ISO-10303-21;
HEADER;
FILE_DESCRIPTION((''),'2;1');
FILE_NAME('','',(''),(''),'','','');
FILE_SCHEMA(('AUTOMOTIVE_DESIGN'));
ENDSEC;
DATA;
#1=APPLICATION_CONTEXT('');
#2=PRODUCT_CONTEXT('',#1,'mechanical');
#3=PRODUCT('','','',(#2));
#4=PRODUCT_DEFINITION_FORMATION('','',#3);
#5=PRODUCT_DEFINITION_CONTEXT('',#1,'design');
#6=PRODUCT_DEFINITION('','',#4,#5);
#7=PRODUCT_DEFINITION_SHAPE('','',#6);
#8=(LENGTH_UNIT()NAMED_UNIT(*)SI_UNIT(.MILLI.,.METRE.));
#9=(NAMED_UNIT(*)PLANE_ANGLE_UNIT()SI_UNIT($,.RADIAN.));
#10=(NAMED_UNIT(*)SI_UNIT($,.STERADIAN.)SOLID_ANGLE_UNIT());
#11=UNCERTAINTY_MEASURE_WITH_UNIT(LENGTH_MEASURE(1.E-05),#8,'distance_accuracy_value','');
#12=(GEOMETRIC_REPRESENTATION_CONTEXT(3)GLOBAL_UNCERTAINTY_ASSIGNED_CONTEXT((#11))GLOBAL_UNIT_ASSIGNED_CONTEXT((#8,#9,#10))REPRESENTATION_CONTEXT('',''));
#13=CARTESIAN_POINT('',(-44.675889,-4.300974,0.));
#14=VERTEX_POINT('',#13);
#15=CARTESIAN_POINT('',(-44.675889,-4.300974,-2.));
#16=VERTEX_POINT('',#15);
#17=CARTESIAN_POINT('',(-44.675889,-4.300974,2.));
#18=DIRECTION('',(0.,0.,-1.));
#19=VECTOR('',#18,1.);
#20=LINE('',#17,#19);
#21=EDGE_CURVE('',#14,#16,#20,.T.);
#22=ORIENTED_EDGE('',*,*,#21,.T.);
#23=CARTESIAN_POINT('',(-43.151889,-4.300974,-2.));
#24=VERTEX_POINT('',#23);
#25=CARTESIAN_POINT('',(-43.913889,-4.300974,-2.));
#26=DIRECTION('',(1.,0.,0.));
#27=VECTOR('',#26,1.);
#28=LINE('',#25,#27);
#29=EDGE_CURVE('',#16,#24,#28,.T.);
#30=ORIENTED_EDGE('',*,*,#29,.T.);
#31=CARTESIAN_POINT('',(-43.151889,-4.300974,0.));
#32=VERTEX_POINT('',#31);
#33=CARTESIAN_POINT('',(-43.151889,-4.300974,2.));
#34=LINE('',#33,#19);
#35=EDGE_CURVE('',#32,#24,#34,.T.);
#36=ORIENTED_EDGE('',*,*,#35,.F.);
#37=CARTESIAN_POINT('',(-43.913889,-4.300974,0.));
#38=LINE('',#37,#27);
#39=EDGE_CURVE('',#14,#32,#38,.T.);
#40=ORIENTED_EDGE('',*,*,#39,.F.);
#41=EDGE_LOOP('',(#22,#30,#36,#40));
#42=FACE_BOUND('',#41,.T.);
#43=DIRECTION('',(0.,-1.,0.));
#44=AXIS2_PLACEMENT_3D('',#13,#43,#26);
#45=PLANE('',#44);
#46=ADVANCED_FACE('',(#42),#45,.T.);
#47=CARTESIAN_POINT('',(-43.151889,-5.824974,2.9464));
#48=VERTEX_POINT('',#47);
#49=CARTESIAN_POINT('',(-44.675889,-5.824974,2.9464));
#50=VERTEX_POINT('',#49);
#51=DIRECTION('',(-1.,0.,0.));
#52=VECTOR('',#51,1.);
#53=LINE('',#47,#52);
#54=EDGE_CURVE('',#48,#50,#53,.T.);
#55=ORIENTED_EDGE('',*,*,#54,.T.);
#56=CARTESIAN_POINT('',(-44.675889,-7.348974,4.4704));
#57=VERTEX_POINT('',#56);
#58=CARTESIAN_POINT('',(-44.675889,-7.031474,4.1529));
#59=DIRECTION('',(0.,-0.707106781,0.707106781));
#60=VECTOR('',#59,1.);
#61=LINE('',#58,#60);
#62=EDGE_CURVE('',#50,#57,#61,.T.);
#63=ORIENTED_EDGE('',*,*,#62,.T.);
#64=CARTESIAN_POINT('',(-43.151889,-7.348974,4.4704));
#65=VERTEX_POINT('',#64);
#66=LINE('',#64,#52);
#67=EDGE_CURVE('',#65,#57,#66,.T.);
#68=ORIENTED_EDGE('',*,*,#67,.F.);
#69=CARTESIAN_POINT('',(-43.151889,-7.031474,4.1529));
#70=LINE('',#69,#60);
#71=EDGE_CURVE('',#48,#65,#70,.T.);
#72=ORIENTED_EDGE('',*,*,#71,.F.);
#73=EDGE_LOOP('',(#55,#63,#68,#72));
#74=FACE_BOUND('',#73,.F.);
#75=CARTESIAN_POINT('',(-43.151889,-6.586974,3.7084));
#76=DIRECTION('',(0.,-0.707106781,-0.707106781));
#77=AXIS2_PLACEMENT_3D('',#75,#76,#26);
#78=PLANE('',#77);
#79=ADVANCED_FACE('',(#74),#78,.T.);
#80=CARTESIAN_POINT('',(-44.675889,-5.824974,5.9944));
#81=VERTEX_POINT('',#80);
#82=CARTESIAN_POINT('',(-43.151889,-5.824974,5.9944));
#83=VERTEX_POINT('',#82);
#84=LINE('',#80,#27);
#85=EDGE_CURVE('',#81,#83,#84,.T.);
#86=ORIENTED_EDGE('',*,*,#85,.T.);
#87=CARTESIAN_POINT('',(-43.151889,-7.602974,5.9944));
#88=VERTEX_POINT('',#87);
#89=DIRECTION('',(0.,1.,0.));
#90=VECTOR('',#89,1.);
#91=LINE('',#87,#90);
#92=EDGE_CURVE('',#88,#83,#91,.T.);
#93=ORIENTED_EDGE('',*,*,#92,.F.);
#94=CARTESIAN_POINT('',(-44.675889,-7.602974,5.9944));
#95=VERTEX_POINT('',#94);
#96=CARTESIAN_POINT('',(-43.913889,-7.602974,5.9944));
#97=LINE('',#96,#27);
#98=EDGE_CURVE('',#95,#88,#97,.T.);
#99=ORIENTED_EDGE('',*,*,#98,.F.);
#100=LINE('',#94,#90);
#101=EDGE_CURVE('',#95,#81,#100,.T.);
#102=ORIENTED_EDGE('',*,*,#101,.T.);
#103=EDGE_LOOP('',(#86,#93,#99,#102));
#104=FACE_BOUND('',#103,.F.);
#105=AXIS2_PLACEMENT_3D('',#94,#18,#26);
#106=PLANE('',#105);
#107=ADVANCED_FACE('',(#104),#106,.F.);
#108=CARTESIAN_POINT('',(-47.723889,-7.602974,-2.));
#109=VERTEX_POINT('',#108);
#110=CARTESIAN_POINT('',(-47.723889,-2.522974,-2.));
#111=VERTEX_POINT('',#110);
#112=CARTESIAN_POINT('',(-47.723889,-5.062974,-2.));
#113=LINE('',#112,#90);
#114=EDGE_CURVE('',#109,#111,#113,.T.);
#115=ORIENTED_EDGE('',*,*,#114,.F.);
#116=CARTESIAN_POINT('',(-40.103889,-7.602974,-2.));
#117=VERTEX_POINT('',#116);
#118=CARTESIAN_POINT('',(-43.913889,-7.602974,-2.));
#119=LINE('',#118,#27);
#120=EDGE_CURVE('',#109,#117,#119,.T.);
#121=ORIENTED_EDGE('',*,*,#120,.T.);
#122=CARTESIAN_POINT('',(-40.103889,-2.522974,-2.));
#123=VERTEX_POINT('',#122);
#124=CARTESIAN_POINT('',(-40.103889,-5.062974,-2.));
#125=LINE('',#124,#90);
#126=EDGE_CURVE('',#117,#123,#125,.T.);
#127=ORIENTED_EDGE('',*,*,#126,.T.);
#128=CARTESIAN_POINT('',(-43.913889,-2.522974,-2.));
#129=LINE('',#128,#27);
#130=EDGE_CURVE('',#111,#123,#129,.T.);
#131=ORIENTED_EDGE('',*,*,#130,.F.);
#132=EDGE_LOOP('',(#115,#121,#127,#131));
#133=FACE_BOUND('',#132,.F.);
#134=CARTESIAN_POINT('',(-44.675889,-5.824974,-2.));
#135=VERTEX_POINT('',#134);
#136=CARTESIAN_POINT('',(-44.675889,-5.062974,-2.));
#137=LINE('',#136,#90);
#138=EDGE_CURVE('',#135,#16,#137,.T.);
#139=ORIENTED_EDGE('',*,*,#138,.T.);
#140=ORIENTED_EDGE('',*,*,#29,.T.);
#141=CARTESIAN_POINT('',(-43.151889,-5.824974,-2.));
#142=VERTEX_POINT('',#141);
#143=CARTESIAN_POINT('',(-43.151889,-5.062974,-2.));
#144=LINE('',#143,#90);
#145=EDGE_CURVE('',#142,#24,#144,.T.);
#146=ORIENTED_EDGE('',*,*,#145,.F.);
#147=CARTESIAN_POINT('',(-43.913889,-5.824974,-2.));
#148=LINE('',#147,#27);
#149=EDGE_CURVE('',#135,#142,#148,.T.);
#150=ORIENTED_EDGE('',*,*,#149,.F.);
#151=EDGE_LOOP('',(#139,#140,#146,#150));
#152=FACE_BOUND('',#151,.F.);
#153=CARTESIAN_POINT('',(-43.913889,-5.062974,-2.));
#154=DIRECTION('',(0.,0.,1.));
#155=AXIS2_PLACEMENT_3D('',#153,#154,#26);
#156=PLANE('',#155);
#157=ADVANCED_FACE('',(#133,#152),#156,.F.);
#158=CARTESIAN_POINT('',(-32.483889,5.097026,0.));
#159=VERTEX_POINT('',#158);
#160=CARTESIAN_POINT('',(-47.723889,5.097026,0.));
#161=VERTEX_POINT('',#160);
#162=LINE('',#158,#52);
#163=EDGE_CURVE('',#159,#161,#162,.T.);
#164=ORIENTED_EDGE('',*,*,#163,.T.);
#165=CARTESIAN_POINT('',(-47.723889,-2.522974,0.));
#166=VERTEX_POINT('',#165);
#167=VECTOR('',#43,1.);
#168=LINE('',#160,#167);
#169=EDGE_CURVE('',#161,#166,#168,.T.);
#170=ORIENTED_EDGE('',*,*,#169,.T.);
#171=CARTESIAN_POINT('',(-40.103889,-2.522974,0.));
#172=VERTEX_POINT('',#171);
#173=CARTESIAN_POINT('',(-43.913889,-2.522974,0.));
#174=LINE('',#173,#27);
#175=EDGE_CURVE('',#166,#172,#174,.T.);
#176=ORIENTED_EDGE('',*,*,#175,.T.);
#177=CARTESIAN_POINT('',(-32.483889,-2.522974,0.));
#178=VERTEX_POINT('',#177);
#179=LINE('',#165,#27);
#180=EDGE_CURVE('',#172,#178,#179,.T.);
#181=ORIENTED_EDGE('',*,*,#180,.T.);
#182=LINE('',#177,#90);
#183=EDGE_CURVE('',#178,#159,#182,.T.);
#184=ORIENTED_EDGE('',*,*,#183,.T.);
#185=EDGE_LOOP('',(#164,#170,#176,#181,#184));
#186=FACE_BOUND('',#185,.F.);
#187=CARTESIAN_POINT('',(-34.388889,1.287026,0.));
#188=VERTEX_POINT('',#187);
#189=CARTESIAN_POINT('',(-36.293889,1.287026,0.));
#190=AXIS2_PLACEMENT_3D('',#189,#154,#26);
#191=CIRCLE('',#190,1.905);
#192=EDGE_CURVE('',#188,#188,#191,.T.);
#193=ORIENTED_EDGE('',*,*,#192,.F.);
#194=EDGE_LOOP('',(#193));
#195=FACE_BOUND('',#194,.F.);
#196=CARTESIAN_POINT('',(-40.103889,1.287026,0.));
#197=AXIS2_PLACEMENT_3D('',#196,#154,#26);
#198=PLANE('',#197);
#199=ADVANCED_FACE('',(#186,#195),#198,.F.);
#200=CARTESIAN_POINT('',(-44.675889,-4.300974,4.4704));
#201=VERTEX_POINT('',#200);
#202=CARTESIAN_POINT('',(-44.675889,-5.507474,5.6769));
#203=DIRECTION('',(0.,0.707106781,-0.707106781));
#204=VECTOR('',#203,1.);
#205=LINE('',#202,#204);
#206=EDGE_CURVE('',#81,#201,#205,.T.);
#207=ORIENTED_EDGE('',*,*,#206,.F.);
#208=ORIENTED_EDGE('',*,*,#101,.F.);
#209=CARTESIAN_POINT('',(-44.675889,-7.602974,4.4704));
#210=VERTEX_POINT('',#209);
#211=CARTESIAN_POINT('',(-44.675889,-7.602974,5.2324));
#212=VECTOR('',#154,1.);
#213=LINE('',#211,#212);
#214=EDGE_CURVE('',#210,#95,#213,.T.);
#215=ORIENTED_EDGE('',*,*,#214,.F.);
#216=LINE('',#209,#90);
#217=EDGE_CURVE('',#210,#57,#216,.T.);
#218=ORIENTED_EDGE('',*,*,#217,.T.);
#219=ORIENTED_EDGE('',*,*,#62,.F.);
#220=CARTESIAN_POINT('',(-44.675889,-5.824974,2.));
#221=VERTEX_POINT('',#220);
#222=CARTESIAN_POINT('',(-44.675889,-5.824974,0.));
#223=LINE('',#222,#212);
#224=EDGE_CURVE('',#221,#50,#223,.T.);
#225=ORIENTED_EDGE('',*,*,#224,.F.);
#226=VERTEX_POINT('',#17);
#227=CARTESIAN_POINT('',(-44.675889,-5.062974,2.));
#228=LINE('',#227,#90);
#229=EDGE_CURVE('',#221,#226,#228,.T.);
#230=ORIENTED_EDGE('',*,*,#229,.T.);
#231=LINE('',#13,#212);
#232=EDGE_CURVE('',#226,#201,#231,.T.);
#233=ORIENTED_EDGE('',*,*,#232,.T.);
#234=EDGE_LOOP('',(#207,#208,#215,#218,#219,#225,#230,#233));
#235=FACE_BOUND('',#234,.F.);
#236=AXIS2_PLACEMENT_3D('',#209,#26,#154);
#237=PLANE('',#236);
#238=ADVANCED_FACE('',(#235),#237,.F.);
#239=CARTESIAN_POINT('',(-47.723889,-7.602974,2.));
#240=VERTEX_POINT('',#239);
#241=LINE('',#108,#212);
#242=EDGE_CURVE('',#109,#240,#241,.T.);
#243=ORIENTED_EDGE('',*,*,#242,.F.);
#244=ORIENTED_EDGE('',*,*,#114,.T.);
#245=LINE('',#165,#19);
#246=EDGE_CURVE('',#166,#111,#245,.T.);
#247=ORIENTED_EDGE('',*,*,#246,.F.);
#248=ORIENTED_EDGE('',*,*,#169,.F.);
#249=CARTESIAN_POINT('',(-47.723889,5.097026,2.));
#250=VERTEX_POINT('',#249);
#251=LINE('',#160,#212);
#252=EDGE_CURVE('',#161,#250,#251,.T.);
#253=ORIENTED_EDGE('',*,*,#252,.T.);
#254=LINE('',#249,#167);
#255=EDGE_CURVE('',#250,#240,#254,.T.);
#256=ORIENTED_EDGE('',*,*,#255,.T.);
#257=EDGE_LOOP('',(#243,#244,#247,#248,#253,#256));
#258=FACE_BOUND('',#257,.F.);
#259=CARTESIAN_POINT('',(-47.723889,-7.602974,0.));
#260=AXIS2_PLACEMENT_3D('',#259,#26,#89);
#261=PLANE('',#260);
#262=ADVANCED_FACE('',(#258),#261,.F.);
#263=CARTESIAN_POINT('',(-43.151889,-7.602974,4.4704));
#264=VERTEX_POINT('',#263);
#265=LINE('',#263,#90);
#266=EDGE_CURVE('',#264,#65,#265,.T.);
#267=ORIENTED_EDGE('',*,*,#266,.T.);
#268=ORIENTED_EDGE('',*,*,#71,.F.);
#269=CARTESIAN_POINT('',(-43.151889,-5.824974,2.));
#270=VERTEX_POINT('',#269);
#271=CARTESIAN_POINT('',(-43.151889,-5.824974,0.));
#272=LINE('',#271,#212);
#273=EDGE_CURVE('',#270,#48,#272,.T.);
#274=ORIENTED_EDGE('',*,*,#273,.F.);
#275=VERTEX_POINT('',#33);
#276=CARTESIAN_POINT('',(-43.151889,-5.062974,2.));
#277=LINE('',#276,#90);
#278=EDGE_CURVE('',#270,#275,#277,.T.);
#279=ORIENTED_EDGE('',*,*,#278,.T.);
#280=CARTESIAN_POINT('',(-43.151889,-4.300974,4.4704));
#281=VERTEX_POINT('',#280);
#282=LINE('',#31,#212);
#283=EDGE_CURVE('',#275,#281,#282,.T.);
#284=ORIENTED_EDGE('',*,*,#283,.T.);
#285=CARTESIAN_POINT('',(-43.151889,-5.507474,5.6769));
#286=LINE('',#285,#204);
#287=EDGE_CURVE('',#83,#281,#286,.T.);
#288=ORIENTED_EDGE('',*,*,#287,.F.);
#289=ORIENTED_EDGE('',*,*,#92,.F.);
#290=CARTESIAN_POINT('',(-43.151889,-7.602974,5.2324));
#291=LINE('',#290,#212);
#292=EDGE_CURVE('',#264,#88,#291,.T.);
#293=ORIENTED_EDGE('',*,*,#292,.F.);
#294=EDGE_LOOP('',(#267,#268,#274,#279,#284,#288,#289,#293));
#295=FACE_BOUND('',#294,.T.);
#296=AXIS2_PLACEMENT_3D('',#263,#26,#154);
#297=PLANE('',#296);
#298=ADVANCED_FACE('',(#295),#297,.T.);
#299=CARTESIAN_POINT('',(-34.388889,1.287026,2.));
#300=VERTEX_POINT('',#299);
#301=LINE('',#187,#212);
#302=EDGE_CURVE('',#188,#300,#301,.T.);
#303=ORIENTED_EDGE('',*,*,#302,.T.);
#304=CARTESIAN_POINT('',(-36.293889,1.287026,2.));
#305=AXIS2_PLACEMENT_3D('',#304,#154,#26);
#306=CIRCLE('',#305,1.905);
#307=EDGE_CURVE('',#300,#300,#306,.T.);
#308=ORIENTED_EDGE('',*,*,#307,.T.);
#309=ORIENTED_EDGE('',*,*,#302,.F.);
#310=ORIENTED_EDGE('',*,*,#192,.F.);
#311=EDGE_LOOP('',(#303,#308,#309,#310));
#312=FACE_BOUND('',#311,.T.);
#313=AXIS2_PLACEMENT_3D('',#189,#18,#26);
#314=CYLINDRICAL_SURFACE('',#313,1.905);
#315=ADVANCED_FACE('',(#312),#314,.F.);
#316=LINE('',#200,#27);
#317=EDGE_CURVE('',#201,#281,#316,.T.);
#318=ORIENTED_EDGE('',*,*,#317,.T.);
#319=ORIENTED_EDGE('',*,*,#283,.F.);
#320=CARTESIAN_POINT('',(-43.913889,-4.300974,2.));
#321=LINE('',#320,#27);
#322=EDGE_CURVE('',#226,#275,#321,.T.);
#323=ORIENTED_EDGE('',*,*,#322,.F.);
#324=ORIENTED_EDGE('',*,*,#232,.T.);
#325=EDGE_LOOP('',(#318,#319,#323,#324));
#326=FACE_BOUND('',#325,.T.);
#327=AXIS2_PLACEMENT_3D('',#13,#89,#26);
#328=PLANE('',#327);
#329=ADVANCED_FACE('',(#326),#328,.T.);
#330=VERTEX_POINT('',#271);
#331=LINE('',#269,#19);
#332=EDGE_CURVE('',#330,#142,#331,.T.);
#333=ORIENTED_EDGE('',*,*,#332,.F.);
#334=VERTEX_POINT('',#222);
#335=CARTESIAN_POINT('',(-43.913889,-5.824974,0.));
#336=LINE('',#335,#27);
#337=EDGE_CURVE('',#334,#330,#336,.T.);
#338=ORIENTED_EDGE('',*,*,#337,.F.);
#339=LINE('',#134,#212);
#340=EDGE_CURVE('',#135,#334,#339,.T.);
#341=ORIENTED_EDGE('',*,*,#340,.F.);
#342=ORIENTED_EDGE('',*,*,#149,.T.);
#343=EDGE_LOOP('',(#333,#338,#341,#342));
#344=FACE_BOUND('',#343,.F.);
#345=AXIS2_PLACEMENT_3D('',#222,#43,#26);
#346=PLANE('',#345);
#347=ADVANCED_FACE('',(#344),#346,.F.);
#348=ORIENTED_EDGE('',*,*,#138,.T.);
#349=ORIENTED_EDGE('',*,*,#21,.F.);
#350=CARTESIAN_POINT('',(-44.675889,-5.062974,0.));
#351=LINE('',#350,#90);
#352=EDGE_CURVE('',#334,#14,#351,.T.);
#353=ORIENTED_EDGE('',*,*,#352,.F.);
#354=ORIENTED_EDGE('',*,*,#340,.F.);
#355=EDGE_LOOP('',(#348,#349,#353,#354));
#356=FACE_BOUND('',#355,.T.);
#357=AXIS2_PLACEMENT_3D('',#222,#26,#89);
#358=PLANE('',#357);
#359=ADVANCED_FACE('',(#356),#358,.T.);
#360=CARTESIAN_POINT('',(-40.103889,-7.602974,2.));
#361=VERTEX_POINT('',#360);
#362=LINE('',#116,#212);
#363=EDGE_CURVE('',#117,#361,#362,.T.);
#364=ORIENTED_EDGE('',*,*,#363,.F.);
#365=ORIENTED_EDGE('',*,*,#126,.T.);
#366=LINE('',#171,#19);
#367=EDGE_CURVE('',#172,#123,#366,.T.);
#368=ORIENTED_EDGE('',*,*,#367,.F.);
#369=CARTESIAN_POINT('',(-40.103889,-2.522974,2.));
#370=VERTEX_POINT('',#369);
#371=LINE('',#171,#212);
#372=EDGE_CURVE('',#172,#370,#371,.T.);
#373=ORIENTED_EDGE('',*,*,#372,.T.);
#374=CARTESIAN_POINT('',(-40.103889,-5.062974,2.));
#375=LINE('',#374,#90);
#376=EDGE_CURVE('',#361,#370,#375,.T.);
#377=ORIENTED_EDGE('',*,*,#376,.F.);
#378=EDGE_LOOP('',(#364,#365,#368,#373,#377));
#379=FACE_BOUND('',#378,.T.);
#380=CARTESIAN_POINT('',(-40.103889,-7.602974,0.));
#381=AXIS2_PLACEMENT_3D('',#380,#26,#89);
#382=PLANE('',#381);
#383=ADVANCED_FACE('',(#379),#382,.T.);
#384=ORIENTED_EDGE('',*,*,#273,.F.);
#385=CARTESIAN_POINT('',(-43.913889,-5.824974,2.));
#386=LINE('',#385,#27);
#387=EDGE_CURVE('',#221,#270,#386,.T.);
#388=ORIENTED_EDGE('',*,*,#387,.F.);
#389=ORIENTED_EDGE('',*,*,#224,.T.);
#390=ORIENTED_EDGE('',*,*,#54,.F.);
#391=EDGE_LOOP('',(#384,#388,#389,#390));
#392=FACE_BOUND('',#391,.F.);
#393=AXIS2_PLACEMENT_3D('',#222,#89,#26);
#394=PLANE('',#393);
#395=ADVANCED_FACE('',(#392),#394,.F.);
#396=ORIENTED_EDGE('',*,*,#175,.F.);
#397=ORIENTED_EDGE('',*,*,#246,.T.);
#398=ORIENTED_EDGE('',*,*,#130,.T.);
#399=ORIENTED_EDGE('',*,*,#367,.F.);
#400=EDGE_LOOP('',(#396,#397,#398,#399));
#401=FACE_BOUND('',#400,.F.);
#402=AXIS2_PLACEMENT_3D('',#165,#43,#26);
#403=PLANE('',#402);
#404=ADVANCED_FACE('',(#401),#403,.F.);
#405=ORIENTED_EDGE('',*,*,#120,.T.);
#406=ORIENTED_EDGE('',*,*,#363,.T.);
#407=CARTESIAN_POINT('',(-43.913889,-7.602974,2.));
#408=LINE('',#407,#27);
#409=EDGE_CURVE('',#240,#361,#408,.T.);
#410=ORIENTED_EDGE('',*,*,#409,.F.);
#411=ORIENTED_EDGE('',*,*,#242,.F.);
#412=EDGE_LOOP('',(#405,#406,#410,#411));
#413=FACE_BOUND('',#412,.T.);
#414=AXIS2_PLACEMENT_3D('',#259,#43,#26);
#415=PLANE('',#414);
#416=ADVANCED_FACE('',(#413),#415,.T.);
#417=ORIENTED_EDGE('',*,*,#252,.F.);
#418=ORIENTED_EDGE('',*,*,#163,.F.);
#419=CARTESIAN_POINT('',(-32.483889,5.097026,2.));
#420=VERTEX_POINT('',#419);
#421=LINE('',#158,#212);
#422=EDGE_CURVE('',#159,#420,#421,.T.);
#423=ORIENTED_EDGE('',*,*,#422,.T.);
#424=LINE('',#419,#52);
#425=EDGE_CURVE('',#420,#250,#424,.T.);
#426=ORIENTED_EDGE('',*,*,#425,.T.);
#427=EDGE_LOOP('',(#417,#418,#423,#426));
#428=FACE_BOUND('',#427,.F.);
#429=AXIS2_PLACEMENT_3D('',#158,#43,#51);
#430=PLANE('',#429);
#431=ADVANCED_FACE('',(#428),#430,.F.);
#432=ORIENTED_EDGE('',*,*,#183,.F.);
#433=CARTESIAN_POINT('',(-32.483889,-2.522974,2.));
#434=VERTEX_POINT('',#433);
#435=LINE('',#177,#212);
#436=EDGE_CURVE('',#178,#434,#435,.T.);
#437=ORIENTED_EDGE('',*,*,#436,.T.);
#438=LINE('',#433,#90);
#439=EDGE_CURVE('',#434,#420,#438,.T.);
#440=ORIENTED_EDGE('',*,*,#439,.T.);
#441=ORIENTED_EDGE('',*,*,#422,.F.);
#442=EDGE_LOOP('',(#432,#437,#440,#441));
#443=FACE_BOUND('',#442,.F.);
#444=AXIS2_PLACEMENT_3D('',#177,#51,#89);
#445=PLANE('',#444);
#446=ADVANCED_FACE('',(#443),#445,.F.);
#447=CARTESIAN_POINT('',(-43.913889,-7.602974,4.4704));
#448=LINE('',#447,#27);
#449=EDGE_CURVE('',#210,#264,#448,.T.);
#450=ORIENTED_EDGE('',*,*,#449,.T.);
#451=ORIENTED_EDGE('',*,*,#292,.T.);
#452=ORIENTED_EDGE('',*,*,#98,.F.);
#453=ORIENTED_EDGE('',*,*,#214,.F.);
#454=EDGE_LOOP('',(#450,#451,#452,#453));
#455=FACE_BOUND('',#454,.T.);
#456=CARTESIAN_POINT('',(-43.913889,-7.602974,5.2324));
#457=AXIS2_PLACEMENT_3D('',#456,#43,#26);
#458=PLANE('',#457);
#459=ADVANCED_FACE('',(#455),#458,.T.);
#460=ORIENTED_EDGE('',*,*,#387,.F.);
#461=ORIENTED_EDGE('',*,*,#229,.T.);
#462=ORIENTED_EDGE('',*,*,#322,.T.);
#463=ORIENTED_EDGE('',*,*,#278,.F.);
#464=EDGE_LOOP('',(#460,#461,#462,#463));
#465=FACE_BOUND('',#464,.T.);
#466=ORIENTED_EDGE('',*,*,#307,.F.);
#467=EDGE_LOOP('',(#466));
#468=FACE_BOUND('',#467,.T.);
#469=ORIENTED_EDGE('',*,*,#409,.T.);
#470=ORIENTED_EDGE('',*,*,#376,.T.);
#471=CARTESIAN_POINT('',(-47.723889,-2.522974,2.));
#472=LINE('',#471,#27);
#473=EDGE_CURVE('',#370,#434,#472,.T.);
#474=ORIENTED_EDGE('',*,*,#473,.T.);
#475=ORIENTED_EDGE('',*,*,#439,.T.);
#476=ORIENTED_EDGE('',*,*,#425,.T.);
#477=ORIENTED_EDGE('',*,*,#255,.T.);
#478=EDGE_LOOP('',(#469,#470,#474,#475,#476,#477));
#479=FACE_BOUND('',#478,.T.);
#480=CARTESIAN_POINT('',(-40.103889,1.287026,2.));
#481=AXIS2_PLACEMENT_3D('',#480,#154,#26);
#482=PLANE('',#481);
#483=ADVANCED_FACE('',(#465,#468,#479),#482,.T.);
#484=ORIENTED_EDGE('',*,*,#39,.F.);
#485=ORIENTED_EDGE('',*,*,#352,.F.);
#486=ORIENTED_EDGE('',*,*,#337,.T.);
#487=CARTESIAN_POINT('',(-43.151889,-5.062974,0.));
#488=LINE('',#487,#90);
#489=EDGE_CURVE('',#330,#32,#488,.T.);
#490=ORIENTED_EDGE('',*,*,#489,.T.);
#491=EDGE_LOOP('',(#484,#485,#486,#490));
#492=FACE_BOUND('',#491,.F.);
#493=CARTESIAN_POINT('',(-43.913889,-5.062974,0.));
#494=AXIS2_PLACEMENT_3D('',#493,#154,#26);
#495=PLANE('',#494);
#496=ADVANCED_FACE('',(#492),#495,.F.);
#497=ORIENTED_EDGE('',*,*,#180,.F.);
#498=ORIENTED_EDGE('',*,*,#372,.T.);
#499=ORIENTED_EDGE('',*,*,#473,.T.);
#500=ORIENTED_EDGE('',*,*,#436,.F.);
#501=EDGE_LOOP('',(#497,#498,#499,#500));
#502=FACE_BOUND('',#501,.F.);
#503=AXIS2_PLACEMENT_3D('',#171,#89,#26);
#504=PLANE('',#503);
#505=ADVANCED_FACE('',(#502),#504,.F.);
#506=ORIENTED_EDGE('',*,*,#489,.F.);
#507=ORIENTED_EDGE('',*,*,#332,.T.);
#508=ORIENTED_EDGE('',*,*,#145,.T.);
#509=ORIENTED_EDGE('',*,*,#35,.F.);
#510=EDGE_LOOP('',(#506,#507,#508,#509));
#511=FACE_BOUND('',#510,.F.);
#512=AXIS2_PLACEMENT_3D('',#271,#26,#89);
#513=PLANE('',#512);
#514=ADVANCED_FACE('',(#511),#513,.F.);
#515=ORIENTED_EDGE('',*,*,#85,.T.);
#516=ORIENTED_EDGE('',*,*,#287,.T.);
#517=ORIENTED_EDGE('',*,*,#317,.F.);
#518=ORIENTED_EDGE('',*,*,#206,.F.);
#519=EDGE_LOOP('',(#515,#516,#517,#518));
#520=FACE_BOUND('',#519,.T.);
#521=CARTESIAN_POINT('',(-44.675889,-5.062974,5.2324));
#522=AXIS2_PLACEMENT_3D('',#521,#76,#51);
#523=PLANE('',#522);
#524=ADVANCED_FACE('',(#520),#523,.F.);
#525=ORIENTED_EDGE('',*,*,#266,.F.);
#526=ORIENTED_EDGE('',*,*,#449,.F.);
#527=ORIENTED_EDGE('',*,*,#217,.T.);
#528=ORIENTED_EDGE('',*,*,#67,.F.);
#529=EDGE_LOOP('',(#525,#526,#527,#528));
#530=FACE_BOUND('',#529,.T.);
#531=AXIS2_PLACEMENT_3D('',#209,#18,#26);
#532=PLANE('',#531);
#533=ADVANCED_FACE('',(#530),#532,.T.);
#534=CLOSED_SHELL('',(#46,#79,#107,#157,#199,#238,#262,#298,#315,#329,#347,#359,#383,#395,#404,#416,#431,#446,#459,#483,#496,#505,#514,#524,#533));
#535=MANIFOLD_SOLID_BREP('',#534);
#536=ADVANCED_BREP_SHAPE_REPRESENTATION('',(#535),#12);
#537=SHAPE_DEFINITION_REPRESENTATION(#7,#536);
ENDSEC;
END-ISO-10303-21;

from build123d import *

# Parameters (mm, degrees)
F0_R     = 1.905
F0_W     = 7.62
F0_H     = 5.08
F0_W_2   = 1.524
F0_H_2   = 1.524
F1_DEPTH = 2
F2_DEPTH = 2
F3_DEPTH = 5.9944
F4_W     = 1.524
F4_H     = 1.524
F5_DEPTH = 2.4638
F6_SIZE  = 1.524


# Not quite as in the source:
# - a feature names something its author has since deleted; it is built from what else it names


with BuildPart() as f1:
    # F0 (on Top) → F1 (new body)
    with BuildSketch(Plane.XY):
        Polygon((-32.4838893509, -2.5229738411), (-32.4838893509, 5.0970261589), (-47.7238893509, 5.0970261589), (-47.7238893509, -2.5229738411), (-40.1038893509, -2.5229738411), align=None)
        with Locations((-36.2938893509, 1.2870261589)):
            Circle(F0_R, mode=Mode.SUBTRACT)
        with Locations((-43.9138893509, -5.0629738411)):
            Rectangle(F0_W, F0_H)
        with Locations((-43.9138893509, -5.0629738411)):
            Rectangle(F0_W_2, F0_H_2, mode=Mode.SUBTRACT)
    extrude(amount=F1_DEPTH)

    # F0 (on Top) → F2 (join)
    with BuildSketch(Plane.XY):
        with Locations((-43.9138893509, -5.0629738411)):
            Rectangle(F0_W, F0_H)
        with Locations((-43.9138893509, -5.0629738411)):
            Rectangle(F0_W_2, F0_H_2, mode=Mode.SUBTRACT)
    extrude(amount=-F2_DEPTH)

    # F0 (on Top) → F3 (join)
    with BuildSketch(Plane.XY):
        with Locations((-43.9138893509, -5.0629738411)):
            Rectangle(F0_W_2, F0_H_2)
    extrude(amount=F3_DEPTH)

    # F4 (on face) → F5 (join)
    with BuildSketch(Plane.XZ.offset(7.6029738411)):
        with Locations((-43.9138893509, 5.2324)):
            Rectangle(F4_W, F4_H)
    extrude(amount=-F5_DEPTH)

    # F6
    f6_edges = [f1.edges().sort_by_distance(p)[0] for p in [
        (-43.913889, -5.824974, 4.4704),
        (-43.913889, -4.300974, 5.9944),
    ]]
    chamfer(f6_edges, length=F6_SIZE)


solid = f1.part
